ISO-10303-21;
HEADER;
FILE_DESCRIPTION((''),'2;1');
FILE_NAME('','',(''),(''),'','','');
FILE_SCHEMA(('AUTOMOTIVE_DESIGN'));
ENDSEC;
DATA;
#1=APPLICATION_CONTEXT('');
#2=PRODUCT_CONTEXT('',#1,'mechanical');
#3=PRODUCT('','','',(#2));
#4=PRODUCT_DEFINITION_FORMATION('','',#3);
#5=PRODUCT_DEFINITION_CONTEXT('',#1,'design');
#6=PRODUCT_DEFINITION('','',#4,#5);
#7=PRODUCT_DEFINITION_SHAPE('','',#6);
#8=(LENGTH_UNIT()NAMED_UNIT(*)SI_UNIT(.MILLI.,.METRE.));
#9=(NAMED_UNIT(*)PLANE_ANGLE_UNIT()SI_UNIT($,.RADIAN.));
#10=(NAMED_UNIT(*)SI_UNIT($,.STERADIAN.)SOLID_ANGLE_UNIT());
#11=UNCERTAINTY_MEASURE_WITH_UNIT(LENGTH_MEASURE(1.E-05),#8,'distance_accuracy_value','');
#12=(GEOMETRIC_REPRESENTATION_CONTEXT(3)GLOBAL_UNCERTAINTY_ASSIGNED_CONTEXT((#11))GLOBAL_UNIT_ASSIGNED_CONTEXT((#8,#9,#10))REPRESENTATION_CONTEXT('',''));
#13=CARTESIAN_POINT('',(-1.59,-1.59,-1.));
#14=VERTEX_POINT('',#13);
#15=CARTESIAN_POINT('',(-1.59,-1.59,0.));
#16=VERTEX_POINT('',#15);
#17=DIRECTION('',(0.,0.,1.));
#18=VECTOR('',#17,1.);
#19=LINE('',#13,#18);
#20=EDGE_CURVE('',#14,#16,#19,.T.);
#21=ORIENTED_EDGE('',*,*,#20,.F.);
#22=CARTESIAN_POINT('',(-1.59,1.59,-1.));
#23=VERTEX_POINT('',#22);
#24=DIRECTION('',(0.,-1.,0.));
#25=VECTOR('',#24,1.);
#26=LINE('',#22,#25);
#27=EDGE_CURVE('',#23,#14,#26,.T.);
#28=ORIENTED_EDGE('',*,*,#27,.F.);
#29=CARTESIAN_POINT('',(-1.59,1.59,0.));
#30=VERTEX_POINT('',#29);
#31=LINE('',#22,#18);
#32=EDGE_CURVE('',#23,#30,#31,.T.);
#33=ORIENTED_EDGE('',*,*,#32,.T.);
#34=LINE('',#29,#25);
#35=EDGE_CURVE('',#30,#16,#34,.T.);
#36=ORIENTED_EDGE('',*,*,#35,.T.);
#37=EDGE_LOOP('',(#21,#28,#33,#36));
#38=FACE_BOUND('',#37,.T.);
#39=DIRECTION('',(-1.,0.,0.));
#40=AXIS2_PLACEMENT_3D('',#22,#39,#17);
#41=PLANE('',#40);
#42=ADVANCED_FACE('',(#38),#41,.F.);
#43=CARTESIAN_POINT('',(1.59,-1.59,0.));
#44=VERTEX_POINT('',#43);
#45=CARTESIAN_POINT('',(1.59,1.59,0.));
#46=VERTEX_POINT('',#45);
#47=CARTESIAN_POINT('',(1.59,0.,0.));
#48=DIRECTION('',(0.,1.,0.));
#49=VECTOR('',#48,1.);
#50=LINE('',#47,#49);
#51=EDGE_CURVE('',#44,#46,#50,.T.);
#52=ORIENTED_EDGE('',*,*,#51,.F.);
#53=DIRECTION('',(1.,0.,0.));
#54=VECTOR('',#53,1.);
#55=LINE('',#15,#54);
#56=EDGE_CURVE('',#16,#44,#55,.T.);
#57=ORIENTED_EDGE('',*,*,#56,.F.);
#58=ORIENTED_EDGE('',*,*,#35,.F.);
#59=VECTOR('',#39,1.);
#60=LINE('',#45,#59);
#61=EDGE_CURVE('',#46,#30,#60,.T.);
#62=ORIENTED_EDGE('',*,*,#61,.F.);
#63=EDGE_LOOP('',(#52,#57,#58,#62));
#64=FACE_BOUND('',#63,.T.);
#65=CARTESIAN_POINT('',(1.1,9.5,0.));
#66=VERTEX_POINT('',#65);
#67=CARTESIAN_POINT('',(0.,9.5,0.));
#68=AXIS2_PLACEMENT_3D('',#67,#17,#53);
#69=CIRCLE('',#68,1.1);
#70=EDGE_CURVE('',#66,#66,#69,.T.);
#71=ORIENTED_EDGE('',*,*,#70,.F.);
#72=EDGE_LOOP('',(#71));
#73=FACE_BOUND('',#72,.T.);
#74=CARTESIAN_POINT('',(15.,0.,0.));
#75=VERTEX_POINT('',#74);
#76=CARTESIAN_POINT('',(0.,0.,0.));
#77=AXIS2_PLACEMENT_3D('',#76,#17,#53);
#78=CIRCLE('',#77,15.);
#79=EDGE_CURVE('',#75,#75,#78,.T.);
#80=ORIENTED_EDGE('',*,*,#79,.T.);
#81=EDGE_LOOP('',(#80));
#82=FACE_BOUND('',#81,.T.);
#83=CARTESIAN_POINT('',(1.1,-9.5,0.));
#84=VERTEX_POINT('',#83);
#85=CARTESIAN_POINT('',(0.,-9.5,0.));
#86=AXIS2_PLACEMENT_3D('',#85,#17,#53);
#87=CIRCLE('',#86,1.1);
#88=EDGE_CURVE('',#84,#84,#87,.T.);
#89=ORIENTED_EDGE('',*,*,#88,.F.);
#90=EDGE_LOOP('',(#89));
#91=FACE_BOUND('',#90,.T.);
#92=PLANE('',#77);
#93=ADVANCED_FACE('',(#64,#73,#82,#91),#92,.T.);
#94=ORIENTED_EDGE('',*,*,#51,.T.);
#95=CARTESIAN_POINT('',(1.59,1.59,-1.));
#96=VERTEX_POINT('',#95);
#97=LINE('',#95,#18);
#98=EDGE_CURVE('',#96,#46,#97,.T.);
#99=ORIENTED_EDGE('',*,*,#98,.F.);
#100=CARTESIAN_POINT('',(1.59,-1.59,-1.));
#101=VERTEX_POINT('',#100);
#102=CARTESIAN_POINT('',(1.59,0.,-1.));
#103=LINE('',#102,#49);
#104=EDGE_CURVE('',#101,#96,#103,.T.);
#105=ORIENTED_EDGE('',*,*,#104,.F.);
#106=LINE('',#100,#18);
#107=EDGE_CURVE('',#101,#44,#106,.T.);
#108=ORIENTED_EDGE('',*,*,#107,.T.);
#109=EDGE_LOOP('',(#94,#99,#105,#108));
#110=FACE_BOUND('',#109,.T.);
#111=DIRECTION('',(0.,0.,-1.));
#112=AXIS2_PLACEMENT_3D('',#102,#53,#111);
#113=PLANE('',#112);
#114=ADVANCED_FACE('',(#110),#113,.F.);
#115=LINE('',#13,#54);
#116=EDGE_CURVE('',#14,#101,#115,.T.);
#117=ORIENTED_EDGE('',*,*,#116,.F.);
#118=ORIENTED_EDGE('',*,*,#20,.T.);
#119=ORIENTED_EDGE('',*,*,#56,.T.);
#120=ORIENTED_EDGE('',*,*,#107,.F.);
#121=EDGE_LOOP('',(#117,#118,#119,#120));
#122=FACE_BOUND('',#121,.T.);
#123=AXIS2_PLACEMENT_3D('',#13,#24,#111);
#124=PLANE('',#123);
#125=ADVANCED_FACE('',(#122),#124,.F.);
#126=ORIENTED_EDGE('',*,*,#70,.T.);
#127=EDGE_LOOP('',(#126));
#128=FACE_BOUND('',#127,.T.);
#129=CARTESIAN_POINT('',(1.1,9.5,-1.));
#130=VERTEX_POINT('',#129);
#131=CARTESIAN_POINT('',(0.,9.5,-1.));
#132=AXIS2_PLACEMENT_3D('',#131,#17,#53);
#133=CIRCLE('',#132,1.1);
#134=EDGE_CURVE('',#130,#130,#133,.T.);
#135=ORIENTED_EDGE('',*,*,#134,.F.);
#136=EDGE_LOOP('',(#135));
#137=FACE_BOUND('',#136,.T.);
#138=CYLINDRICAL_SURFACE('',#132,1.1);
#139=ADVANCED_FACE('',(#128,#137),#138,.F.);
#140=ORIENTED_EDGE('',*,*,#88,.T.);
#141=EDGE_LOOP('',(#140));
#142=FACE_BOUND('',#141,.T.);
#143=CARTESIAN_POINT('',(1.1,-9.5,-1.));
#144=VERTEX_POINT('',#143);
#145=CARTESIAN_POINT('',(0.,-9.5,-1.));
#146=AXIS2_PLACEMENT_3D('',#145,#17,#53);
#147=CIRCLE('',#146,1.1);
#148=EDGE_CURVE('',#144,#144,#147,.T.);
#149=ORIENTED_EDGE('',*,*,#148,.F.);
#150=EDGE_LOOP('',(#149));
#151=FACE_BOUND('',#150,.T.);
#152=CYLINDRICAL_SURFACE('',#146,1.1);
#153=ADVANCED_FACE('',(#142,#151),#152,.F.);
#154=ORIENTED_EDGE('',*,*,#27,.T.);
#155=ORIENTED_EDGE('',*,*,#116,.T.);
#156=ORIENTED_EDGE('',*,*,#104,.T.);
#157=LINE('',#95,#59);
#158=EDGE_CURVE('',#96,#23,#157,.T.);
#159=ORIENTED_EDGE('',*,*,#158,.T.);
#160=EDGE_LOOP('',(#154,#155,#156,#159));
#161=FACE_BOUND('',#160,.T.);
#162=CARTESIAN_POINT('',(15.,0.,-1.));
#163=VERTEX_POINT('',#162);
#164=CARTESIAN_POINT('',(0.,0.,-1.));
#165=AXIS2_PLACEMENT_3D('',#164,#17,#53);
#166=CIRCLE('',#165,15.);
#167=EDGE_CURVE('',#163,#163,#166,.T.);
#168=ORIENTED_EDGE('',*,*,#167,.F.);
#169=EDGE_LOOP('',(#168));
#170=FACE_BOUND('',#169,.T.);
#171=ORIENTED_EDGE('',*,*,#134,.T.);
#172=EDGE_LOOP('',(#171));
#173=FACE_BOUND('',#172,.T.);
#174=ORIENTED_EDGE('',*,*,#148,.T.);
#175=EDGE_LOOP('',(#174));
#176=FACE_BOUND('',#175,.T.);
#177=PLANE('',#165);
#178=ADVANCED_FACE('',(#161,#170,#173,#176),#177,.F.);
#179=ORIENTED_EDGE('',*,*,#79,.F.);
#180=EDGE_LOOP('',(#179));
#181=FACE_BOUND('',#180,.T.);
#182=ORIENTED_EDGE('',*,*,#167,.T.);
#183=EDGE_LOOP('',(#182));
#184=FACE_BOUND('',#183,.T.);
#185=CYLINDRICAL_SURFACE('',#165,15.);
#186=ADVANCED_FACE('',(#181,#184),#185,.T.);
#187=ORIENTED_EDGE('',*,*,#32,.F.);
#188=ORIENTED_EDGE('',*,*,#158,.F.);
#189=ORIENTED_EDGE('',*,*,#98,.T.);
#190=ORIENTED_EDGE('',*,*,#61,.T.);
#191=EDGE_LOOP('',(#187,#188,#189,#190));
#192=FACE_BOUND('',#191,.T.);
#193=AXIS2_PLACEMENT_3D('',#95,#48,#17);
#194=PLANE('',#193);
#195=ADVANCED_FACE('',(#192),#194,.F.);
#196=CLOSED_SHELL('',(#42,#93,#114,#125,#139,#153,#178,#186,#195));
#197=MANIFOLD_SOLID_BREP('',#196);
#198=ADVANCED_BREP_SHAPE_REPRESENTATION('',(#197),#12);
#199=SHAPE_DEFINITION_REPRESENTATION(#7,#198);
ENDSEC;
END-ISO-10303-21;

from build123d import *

# Parameters (mm, degrees)
SKETCH1_R          = 15
SKETCH1_R_2        = 1.1
BASE_FLANGE1_DEPTH = 1


# Sheet-metal steps are written as plain solids
with BuildPart() as part:
    # Sketch1 → Base-Flange1 (new body)
    with BuildSketch(Plane.XY):
        Circle(SKETCH1_R)
        with Locations((0, 9.5)):
            Circle(SKETCH1_R_2, mode=Mode.SUBTRACT)
        with Locations((0, -9.5)):
            Circle(SKETCH1_R_2, mode=Mode.SUBTRACT)
        Polygon((1.59, 0), (1.59, 1.59), (-1.59, 1.59), (-1.59, -1.59), (1.59, -1.59), align=None, mode=Mode.SUBTRACT)
    extrude(amount=-BASE_FLANGE1_DEPTH)


solid = part.part
